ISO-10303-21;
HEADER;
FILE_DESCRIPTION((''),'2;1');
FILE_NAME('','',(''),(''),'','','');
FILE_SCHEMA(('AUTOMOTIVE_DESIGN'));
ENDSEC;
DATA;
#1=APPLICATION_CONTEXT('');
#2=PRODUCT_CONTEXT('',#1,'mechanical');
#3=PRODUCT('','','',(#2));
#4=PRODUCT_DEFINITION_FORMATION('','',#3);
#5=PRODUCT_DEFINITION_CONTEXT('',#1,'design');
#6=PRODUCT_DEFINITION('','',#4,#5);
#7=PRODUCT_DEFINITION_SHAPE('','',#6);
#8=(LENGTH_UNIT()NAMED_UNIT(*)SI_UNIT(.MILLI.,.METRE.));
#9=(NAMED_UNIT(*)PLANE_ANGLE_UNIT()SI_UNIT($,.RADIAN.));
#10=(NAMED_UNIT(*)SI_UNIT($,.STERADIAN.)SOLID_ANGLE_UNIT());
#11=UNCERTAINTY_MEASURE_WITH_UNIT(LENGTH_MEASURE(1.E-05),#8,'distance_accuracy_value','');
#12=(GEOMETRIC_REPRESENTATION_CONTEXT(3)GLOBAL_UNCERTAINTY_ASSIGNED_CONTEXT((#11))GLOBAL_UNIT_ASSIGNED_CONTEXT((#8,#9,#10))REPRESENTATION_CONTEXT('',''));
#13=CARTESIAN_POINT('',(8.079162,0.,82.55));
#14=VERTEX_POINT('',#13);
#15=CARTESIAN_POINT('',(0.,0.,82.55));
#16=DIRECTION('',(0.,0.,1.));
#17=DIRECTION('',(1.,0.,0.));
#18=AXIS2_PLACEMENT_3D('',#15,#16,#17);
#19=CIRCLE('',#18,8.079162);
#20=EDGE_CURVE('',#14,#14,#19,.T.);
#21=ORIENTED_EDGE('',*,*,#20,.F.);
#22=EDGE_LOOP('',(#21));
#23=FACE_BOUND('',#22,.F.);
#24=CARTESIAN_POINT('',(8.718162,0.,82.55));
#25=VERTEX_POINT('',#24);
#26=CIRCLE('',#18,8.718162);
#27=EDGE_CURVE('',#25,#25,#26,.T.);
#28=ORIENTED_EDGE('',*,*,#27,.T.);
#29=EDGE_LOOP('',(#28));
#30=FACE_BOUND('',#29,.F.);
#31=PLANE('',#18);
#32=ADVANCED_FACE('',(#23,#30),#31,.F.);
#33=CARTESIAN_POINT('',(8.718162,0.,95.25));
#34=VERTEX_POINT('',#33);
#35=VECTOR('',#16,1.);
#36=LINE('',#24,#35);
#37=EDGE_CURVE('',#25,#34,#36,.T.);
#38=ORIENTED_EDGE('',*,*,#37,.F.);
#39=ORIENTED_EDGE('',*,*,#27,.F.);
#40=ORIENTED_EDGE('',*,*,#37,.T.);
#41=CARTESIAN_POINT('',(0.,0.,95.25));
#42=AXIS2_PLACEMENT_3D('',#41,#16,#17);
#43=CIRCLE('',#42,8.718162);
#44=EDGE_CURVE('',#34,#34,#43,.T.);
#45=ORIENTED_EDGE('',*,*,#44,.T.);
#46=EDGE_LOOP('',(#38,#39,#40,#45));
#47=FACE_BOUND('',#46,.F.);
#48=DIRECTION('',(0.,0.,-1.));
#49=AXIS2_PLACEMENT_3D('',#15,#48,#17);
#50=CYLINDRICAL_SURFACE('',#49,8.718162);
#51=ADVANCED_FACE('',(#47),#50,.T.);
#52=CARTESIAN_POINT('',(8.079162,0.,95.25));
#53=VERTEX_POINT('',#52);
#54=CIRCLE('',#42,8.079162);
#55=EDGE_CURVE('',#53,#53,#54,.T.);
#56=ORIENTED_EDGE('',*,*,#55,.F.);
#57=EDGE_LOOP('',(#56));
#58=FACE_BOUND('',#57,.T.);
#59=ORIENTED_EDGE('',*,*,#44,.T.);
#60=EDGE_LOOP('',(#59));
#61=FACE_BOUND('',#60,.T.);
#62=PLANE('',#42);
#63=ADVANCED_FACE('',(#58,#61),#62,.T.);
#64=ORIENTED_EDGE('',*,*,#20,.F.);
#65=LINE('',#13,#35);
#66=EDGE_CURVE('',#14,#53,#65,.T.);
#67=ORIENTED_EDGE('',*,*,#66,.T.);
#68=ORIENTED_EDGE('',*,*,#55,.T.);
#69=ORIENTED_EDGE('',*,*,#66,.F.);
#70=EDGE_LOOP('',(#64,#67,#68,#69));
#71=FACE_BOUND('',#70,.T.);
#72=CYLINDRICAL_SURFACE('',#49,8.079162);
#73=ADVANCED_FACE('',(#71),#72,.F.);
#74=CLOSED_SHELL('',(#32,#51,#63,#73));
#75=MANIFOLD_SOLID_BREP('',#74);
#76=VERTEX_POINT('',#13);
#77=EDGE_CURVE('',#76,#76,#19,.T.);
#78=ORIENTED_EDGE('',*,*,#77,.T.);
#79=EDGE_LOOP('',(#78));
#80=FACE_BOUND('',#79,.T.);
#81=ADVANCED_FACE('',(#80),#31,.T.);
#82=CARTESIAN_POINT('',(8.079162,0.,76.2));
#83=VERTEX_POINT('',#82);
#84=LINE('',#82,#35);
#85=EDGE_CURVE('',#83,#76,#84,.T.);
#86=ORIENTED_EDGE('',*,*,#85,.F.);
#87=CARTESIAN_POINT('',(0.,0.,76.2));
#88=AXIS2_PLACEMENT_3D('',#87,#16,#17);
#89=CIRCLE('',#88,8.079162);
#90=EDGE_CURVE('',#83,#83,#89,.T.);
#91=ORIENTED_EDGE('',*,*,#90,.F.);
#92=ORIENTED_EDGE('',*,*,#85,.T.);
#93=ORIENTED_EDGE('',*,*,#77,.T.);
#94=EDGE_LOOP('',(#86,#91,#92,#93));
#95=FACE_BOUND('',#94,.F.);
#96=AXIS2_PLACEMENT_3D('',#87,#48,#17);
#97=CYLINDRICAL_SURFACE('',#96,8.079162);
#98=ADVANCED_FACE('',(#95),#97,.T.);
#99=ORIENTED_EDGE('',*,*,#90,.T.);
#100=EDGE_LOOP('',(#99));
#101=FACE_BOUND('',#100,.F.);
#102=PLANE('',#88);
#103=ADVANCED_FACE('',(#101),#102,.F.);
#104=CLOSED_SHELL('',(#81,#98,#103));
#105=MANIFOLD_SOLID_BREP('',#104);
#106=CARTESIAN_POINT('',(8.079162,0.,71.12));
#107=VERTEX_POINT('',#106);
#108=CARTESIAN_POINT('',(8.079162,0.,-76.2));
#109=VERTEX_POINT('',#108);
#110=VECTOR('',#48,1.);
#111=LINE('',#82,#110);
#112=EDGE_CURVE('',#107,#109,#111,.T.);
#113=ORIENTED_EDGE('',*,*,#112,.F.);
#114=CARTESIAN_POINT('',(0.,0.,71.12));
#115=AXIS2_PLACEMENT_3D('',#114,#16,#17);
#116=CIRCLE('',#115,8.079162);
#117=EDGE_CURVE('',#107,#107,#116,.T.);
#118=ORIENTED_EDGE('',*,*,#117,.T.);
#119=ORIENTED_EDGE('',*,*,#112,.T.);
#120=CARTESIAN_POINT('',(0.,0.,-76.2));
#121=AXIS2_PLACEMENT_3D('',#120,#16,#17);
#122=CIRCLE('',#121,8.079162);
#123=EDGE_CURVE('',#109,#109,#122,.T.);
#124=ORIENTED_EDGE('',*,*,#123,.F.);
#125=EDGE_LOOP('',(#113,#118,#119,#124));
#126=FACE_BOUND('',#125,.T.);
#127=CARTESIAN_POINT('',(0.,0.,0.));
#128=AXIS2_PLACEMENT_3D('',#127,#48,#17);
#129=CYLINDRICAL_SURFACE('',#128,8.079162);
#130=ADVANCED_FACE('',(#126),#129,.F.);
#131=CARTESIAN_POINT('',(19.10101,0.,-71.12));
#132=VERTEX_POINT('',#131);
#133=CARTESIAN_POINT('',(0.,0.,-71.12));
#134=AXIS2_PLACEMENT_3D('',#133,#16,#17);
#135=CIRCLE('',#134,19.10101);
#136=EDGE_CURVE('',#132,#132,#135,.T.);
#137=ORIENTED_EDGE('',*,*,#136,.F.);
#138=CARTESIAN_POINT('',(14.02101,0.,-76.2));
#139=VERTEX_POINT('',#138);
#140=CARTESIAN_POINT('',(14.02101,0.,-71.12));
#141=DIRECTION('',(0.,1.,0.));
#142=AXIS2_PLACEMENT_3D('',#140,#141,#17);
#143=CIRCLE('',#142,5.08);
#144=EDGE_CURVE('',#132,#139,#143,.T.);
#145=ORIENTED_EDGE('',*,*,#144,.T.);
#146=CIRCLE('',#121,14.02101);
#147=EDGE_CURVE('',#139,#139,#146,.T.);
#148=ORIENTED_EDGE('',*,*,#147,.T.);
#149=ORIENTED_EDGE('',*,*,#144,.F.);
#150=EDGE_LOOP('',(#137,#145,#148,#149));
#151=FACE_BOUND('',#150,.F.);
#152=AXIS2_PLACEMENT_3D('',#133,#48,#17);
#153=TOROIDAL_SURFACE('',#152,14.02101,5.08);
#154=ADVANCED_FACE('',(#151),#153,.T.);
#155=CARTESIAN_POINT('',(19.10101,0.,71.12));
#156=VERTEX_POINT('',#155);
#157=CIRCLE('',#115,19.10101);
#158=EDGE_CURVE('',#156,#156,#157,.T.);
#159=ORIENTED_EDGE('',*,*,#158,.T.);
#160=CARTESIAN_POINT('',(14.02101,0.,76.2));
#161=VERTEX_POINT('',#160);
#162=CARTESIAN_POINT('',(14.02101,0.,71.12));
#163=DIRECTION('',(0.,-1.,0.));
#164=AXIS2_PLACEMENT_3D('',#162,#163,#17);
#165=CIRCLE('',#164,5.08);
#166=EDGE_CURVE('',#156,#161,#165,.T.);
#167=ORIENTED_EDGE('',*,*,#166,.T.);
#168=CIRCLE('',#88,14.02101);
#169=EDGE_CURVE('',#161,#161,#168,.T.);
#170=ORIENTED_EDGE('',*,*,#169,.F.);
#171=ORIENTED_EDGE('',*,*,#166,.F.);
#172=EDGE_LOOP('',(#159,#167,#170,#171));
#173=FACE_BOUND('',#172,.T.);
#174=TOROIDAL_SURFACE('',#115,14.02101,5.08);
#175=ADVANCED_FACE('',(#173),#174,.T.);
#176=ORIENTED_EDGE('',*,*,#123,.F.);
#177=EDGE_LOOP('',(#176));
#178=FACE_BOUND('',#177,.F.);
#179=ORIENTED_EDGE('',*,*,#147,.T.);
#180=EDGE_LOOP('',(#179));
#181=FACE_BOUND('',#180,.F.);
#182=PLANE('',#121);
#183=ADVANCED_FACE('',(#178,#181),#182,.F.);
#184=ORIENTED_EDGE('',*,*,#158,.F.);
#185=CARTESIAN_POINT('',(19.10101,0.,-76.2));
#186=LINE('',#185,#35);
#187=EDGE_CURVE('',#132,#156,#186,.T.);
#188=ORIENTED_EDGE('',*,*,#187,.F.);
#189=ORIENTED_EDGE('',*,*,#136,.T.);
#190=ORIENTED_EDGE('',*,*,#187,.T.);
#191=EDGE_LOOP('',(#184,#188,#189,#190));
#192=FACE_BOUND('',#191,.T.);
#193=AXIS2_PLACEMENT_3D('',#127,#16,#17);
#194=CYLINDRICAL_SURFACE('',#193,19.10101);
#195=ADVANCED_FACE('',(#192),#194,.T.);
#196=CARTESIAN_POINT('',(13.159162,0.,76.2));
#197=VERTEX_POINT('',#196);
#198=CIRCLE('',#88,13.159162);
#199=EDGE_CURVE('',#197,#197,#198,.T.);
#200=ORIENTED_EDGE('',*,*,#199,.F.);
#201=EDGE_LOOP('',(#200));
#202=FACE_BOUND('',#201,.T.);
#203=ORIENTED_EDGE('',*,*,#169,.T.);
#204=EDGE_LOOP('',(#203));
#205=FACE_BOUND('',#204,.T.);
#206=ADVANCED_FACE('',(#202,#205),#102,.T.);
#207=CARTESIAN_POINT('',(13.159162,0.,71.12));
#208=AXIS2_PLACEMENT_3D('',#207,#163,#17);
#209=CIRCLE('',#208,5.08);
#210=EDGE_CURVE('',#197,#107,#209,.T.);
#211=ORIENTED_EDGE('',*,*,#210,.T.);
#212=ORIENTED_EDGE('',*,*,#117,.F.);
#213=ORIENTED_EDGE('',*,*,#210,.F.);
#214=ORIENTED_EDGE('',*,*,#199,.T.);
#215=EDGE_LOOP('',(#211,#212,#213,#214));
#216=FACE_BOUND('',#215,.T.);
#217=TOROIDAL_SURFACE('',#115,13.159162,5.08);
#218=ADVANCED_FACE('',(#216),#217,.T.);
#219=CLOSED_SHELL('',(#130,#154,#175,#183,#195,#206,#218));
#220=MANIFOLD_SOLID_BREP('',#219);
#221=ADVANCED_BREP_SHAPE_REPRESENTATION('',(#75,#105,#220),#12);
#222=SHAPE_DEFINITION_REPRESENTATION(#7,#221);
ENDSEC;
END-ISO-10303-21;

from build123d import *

# Parameters (mm, degrees)
F0_R     = 19.1010102766
F0_R_2   = 8.0791616643
F1_DEPTH = 76.2
F3_R     = 5.08
F2_R     = 8.0791616643
F4_DEPTH = 6.35
F6_R     = 5.08
F7_R     = 8.7181621078
F7_R_2   = 8.0791616643
F8_DEPTH = 12.7


with BuildPart() as f1:
    # F0 (on Top) → F1 (new body, symmetric)
    with BuildSketch(Plane.XY):
        Circle(F0_R)
        Circle(F0_R_2, mode=Mode.SUBTRACT)
    extrude(amount=F1_DEPTH, both=True)

    # F3
    f3_edges = [f1.edges().sort_by_distance(p)[0] for p in [
        (-19.10101, 0, -76.2),
    ]]
    fillet(f3_edges, radius=F3_R)

    # F6
    f6_edges = [f1.edges().sort_by_distance(p)[0] for p in [
        (-19.10101, 0, 76.2),
        (-8.079162, 0, 76.2),
    ]]
    fillet(f6_edges, radius=F6_R)


with BuildPart() as f4:
    # F2 (on face) → F4 (new body)
    with BuildSketch(Plane.XY.offset(76.2)):
        Circle(F2_R)
    extrude(amount=F4_DEPTH)


with BuildPart() as f8:
    # F7 (on face) → F8 (new body)
    with BuildSketch(Plane.XY.offset(82.55)):
        Circle(F7_R)
        Circle(F7_R_2, mode=Mode.SUBTRACT)
    extrude(amount=F8_DEPTH)


solid = Compound([f1.part, f4.part, f8.part])
